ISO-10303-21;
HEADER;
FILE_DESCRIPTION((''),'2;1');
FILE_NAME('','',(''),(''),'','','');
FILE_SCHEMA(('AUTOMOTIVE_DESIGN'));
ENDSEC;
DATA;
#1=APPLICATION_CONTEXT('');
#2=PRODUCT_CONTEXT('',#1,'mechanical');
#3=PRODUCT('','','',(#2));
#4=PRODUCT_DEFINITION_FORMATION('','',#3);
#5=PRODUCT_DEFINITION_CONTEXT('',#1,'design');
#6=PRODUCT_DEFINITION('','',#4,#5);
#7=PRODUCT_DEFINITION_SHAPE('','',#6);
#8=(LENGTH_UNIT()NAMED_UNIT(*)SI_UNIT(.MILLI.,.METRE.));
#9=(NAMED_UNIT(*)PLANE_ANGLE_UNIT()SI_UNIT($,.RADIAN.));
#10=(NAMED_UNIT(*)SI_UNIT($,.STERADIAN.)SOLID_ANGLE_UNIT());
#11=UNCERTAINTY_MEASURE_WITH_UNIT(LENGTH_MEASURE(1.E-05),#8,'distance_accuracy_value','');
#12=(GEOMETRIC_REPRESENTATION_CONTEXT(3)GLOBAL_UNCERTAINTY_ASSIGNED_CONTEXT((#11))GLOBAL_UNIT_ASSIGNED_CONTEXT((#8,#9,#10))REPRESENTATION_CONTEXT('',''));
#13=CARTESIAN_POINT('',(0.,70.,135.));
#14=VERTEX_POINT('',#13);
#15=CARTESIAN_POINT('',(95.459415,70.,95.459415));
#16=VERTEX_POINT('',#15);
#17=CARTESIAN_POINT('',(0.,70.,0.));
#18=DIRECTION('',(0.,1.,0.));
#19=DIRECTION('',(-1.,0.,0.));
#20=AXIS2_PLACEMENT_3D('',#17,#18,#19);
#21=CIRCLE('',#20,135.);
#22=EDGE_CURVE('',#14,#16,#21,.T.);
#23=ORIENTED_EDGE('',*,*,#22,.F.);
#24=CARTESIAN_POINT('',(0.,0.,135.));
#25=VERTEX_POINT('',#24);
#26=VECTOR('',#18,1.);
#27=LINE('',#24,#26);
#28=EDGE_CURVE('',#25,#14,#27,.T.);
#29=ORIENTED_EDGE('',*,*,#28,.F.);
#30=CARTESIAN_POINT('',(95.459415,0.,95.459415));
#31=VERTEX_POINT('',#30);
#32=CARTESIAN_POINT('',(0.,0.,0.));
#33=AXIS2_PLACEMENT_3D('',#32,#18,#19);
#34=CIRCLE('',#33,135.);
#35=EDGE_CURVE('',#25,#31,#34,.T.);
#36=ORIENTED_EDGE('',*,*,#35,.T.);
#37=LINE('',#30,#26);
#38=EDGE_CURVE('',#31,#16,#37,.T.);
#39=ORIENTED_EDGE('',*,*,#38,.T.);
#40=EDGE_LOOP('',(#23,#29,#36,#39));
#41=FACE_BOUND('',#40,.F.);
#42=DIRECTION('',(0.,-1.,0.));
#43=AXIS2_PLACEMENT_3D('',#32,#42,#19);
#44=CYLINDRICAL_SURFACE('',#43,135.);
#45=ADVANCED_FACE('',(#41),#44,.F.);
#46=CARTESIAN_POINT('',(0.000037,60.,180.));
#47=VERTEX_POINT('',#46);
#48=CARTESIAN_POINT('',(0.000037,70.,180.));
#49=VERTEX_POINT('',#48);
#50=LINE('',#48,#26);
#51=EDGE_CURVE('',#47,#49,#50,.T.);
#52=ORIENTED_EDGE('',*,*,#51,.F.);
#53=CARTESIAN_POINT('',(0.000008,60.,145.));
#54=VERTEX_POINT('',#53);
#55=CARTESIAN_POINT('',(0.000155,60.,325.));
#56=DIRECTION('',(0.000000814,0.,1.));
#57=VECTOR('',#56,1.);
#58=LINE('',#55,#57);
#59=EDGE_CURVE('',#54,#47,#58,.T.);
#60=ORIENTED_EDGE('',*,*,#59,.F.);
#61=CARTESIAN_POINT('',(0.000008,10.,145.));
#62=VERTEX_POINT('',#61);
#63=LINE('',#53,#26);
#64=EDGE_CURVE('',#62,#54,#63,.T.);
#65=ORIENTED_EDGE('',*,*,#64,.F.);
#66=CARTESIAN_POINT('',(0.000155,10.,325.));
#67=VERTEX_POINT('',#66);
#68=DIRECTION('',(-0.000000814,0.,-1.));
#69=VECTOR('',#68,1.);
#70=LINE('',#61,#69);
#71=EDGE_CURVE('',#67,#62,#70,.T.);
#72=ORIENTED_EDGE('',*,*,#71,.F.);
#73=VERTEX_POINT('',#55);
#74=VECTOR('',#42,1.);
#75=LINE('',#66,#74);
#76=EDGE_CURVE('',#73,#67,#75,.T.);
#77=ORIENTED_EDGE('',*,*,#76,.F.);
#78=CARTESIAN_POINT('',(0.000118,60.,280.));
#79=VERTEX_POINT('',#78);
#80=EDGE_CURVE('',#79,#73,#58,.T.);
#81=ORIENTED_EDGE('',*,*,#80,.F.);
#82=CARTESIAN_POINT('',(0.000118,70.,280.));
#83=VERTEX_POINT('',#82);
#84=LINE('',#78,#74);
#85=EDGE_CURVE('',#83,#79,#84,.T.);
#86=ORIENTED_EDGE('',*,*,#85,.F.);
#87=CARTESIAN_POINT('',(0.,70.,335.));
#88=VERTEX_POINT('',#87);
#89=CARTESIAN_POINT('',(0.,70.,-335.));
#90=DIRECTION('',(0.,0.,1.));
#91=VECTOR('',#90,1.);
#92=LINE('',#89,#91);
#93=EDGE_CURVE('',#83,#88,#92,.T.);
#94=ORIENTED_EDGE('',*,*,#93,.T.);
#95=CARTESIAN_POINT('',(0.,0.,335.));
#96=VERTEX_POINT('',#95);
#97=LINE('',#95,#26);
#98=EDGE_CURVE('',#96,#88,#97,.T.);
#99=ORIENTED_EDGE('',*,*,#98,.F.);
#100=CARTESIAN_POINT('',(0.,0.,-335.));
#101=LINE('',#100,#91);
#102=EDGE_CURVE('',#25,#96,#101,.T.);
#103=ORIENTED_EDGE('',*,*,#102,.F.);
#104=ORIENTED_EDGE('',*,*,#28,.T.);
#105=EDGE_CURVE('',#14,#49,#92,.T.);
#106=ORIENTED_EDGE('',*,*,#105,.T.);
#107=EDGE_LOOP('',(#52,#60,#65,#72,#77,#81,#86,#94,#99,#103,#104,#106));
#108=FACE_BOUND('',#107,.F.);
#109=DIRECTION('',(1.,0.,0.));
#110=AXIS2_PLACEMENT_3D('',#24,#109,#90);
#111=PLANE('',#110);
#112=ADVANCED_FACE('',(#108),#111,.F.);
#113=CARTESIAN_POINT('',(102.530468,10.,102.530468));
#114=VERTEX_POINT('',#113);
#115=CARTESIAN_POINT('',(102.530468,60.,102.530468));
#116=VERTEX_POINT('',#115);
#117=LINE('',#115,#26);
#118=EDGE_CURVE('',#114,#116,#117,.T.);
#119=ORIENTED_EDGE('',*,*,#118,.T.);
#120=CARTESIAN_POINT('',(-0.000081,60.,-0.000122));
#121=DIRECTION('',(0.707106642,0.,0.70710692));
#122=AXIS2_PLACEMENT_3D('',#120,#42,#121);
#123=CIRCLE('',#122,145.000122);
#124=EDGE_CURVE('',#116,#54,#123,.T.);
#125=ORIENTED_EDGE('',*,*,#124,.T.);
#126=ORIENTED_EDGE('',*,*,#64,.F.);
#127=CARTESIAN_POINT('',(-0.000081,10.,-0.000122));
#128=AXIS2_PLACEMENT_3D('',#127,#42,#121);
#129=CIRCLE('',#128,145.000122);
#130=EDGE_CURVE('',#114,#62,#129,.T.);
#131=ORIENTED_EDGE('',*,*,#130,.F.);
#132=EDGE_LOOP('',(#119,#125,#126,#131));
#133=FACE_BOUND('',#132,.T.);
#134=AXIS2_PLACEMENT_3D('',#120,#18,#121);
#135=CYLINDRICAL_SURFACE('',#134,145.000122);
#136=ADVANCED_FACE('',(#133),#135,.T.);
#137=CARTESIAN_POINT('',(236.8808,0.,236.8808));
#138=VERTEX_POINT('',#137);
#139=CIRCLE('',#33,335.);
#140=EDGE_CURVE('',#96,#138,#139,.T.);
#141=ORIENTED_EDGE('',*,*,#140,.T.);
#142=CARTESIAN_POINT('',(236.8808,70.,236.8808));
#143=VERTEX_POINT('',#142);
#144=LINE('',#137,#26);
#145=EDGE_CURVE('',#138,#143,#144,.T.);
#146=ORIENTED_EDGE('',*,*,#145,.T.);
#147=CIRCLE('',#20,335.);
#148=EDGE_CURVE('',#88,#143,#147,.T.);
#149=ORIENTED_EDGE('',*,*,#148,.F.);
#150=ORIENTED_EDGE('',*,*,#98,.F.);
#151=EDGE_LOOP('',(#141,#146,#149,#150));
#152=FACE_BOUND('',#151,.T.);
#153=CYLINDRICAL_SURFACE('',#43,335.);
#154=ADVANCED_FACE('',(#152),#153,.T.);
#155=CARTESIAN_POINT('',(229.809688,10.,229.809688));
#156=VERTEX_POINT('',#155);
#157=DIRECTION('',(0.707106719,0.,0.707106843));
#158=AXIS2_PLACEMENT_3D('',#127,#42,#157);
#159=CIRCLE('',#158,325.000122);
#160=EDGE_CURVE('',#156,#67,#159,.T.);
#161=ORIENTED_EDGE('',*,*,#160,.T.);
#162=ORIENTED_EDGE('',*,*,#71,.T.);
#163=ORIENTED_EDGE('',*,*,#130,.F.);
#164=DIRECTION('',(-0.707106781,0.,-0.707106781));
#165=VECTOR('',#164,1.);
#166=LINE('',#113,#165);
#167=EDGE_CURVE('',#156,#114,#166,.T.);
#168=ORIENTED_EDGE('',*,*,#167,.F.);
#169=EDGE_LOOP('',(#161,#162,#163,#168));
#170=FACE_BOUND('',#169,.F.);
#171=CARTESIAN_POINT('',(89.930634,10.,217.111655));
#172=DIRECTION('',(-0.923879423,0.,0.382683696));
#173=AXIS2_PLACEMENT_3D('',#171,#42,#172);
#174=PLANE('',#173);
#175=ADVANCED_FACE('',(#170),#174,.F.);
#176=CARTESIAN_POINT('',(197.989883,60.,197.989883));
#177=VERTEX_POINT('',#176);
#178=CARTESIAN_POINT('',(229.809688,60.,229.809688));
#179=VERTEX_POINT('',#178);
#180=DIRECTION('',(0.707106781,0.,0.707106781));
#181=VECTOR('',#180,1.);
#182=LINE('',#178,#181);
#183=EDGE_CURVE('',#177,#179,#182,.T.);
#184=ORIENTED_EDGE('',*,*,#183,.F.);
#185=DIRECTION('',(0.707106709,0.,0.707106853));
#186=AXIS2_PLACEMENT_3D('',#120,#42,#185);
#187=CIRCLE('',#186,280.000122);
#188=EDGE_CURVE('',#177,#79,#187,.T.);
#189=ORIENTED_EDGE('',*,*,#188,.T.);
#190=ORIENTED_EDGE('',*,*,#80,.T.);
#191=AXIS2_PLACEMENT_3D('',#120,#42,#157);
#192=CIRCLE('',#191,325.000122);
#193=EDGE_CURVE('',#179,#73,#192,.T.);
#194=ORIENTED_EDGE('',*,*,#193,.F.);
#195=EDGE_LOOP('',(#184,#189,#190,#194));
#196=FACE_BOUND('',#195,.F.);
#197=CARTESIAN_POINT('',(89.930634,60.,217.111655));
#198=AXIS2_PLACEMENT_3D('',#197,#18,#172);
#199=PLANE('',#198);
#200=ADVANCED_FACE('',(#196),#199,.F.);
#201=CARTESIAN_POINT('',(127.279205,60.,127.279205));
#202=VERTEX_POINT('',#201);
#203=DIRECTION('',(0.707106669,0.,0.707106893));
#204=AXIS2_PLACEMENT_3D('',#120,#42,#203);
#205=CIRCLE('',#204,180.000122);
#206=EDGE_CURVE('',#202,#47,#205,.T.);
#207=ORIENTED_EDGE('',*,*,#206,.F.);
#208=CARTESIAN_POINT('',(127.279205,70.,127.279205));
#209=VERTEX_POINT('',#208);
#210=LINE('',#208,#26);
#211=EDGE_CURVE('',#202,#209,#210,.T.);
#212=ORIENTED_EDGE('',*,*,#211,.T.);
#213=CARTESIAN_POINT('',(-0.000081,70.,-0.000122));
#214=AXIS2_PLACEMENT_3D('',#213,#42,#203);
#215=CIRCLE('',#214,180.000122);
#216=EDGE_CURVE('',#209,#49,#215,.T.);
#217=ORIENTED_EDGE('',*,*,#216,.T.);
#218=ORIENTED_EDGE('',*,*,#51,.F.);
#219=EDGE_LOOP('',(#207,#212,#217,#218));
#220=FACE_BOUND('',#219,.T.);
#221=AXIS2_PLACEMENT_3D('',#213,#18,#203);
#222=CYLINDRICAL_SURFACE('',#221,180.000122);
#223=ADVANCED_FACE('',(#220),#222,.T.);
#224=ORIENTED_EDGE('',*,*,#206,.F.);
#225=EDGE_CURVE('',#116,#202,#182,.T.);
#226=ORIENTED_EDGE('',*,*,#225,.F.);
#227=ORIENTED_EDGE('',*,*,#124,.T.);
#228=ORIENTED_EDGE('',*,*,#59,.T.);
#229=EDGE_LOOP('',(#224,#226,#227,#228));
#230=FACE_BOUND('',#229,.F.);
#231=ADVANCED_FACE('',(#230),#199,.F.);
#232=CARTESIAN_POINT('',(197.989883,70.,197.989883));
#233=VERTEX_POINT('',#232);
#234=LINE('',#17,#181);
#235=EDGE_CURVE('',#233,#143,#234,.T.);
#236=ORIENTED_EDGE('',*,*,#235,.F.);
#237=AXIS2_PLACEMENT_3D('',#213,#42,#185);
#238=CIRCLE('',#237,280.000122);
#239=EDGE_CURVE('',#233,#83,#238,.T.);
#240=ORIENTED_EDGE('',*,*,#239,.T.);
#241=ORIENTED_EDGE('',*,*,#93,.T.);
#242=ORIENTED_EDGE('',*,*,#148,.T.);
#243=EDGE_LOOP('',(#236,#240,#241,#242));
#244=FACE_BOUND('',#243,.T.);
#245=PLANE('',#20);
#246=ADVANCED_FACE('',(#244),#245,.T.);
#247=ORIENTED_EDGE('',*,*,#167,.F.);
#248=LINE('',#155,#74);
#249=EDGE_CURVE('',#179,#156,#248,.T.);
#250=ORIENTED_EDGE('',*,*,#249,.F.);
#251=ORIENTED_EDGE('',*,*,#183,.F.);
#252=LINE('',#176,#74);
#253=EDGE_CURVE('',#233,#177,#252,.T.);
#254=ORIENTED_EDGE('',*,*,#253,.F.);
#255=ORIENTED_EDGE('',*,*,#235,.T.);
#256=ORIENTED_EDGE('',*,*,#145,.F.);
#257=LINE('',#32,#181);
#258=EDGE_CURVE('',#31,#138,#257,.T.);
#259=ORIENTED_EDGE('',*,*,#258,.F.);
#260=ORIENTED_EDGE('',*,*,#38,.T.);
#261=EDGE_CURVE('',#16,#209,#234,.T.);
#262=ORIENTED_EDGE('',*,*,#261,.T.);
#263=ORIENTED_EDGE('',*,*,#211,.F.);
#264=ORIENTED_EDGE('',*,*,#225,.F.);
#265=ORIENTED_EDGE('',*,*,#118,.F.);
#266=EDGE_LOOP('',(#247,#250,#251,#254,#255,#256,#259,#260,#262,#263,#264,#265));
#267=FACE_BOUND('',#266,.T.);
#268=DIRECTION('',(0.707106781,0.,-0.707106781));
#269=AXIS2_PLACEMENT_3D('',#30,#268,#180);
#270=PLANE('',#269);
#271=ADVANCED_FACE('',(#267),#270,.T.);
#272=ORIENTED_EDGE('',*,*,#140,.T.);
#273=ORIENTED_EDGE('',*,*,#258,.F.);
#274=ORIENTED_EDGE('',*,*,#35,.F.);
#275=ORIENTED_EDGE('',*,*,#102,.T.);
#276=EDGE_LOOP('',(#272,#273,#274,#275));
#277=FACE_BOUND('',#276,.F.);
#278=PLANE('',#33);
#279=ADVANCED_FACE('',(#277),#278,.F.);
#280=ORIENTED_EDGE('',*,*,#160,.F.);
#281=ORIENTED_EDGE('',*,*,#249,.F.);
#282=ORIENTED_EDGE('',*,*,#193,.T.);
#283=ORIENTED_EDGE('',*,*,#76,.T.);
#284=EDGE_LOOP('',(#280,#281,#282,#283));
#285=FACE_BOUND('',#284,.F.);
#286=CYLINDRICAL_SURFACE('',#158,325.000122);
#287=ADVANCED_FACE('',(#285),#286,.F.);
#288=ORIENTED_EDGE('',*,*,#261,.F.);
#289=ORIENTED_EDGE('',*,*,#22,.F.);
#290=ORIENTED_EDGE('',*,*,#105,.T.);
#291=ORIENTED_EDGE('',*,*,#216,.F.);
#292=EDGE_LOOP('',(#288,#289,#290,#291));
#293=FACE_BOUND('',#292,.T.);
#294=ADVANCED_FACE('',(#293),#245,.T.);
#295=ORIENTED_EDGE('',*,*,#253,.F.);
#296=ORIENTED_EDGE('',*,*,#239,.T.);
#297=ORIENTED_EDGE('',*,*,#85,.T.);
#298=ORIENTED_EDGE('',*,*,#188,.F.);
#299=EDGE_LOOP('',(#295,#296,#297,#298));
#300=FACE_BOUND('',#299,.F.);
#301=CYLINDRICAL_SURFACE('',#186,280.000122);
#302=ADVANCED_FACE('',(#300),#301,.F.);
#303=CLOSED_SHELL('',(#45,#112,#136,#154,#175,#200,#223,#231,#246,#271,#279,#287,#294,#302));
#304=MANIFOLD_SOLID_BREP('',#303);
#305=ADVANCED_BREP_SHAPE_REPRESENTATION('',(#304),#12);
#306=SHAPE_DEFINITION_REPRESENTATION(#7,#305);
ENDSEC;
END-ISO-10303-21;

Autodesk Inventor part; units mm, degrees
ref_plane "YZ Plane" through (0, 0, 0) normal (1, 0, 0) x (0, 1, 0)
ref_plane "XZ Plane" through (0, 0, 0) normal (0, 1, 0) x (-1, 0, 0)
ref_plane "XY Plane" through (0, 0, 0) normal (0, 0, 1) x (1, 0, 0)
sketch "Sketch1" plane through (0, 0, 0) normal (0, 1, 0) x (-1, 0, 0)
  circle A0 centre (0, 0) radius 335
  line L0 (335, 0) -> (-335, 0)
  line L1 (0, -335) -> (0, 335)
  line L2 (0, 0) -> (-236.8808, 236.8808)
  line L3 (0, 0) -> (236.8808, -236.8808)
  line L4 (0, 0) -> (236.8808, 236.8808)
  line L5 (0, 0) -> (-236.8808, -236.8808)
  circle A1 centre (0, 0) radius 135
  point P0 (-95.4594, 95.4594)
  point P1 (0, 135)
  dimension "d0" = 670
  dimension "d1" = 45
  dimension "d2" = 45
  dimension "d17" = 200
extrude "Extrusion1" add sketch "Sketch1" along normal blind 70 contours L1 A1 L2 A0
sketch "Sketch2" plane through (95.4594, 0, 95.4594) normal (0.7071068, 0, -0.7071068) x (-0.7071068, 0, -0.7071068)
  line L0 (-190, 60) -> (-10, 60)
  line L1 (-10, 60) -> (-10, 10)
  line L2 (-10, 10) -> (-190, 10)
  line L3 (-190, 10) -> (-190, 60)
  line L4 (-200, 0) -> (0, 0) projected
  line L5 (-200, 70) -> (0, 70) projected
  line L6 (-200, 0) -> (-200, 70) projected
  line L7 (0, 0) -> (0, 70) projected
  point P0 (135, 0)
  point P1 (0, 35)
  dimension "d6" = 10
  dimension "d7" = 10
  dimension "d8" = 10
  dimension "d9" = 10
sketch3d "3D Sketch1"
  arc A0 (95.4594, 70, 95.4594) -> (0, 70, 135) centre (0, 70, 0) ccw
sweep "Sweep1" cut profiles "Sketch2" path "3D Sketch1" contours L0 L1 L2 L3
sketch "Sketch3" plane through (95.4594, 0, 95.4594) normal (0.7071068, 0, -0.7071068) x (-0.7071068, 0, -0.7071068)
  line L0 (-101.8808, 70) -> (-200, 70) projected
  line L1 (32.4695, 60) -> (-94.8097, 60) projected
  line L2 (-145, 70) -> (-45, 70)
  line L3 (-45, 70) -> (-45, 60)
  line L4 (-45, 60) -> (-145, 60)
  line L5 (-145, 60) -> (-145, 70)
  line L6 (-200, 0) -> (-200, 70) projected
  line L7 (0, 0) -> (0, 70) projected
  point P0 (135, 0)
  dimension "d16" = 100
  dimension "d18" = 45
sketch3d "3D Sketch2"
  arc A0 (95.4594, 70, 95.4594) -> (0, 70, 135) centre (0, 70, 0) ccw
sweep "Sweep2" cut profiles "Sketch3" path "3D Sketch2"
properties part number "Carousel Fixed Track"
